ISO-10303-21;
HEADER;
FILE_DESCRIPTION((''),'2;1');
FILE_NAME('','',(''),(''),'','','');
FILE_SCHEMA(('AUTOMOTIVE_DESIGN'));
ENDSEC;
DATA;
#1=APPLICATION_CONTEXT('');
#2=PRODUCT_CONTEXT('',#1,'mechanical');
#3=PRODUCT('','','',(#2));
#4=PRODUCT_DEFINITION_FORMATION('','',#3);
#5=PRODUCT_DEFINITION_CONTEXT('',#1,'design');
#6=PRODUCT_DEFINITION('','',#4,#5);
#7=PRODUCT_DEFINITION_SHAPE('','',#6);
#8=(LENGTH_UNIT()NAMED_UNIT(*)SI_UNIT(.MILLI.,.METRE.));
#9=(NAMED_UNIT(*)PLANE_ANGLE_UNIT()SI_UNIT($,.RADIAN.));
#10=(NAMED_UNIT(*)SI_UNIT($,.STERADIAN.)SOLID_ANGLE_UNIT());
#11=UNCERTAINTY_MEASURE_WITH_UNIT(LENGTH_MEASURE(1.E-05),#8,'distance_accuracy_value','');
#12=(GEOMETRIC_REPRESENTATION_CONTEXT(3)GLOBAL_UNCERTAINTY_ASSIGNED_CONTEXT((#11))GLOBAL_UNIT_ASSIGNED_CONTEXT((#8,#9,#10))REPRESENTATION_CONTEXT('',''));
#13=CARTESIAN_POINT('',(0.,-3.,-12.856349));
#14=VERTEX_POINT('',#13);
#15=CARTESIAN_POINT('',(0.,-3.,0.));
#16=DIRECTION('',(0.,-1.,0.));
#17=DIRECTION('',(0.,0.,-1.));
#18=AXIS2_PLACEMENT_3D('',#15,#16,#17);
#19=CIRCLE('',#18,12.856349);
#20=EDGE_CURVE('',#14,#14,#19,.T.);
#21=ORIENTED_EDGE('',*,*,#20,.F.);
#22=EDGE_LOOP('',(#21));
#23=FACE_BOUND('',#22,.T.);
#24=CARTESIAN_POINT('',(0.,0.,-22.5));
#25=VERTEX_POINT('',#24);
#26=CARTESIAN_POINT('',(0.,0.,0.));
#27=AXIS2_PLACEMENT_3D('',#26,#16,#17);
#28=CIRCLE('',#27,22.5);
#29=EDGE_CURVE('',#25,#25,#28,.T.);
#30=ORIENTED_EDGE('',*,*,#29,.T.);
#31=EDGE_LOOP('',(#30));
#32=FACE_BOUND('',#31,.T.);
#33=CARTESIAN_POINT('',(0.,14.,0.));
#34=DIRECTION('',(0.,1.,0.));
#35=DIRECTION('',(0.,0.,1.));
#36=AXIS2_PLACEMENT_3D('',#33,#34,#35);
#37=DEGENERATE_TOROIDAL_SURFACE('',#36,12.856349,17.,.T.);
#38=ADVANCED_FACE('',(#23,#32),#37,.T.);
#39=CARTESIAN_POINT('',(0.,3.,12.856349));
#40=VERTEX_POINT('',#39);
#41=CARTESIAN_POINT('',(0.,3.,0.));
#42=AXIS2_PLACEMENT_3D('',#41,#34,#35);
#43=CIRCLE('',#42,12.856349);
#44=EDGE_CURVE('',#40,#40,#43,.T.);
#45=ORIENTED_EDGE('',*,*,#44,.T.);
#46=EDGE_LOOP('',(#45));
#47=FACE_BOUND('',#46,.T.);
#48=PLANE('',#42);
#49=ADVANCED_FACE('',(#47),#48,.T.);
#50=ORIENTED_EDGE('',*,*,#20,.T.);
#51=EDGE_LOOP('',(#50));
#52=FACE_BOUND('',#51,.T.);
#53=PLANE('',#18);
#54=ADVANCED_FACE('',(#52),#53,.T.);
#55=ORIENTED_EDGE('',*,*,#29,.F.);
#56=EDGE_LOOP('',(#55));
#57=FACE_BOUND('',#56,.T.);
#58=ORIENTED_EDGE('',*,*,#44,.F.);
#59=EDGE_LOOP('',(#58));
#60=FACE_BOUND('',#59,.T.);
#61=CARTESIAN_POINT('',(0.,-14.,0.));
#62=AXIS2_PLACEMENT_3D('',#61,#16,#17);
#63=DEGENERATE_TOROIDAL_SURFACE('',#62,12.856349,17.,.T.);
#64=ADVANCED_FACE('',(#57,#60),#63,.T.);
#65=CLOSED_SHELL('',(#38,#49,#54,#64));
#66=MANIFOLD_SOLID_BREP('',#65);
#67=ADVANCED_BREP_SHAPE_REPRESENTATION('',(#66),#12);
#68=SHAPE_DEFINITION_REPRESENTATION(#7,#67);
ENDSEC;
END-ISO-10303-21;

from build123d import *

# Parameters (mm, degrees)
SKETCH_1_R      = 22.5
EXTRUDE_5_DEPTH = 3
FILLET_3_R      = 17
SKETCH_4_R      = 22.5
EXTRUDE_6_DEPTH = 3
FILLET_4_R      = 17


with BuildPart() as part:
    # 草图1 → 凸台-拉伸5 (new body)
    with BuildSketch(Plane(origin=(0, 0, 0), x_dir=(1, 0, 0), z_dir=(0, 1, 0))):
        with Locations(Location((0, 0, 0), (0, 0, 270))):
            Circle(SKETCH_1_R)
    extrude(amount=EXTRUDE_5_DEPTH)

    # 圆角3
    # the kernel refuses this fillet: 17 mm, written as the material it takes off along each edge
    with BuildSketch(Plane(origin=(0, 3, 0), x_dir=(0, 0, 1), z_dir=(-1, 0, 0))) as fillet_3_piece_1:
        with BuildLine():
            CenterArc((12.856349239, -17), FILLET_3_R, 55.43967822, 34.56032178)
            Line((12.856349239, 0), (12.856349239, 0.34))
            Line((12.856349239, 0.34), (22.5, 0.34))
            Line((22.5, 0.34), (22.84, 0))
            ThreePointArc((22.84, 0), (22.84, -1.5), (22.692873015, -2.72))
            Line((22.692873015, -2.72), (22.5, -3))
        make_face()
    revolve(axis=Axis((0, 3, 0), (0, 1, 0)), mode=Mode.SUBTRACT)

    # 草图4 → 凸台-拉伸6 (add)
    with BuildSketch(Plane.XZ):
        with Locations(Location((0, 0, 0), (0, 0, 270))):
            Circle(SKETCH_4_R)
    extrude(amount=EXTRUDE_6_DEPTH)

    # 圆角4
    # the kernel refuses this fillet: 17 mm, written as the material it takes off along each edge
    with BuildSketch(Plane(origin=(0, -3, 0), x_dir=(0, 0, -1), z_dir=(-1, 0, 0))) as fillet_4_piece_1:
        with BuildLine():
            CenterArc((12.856349239, -17), FILLET_4_R, 55.43967822, 34.56032178)
            Line((12.856349239, 0), (12.856349239, 0.34))
            Line((12.856349239, 0.34), (22.5, 0.34))
            Line((22.5, 0.34), (22.84, 0))
            ThreePointArc((22.84, 0), (22.84, -1.5), (22.692873015, -2.72))
            Line((22.692873015, -2.72), (22.5, -3))
        make_face()
    revolve(axis=Axis((0, -3, 0), (0, -1, 0)), mode=Mode.SUBTRACT)


solid = part.part
